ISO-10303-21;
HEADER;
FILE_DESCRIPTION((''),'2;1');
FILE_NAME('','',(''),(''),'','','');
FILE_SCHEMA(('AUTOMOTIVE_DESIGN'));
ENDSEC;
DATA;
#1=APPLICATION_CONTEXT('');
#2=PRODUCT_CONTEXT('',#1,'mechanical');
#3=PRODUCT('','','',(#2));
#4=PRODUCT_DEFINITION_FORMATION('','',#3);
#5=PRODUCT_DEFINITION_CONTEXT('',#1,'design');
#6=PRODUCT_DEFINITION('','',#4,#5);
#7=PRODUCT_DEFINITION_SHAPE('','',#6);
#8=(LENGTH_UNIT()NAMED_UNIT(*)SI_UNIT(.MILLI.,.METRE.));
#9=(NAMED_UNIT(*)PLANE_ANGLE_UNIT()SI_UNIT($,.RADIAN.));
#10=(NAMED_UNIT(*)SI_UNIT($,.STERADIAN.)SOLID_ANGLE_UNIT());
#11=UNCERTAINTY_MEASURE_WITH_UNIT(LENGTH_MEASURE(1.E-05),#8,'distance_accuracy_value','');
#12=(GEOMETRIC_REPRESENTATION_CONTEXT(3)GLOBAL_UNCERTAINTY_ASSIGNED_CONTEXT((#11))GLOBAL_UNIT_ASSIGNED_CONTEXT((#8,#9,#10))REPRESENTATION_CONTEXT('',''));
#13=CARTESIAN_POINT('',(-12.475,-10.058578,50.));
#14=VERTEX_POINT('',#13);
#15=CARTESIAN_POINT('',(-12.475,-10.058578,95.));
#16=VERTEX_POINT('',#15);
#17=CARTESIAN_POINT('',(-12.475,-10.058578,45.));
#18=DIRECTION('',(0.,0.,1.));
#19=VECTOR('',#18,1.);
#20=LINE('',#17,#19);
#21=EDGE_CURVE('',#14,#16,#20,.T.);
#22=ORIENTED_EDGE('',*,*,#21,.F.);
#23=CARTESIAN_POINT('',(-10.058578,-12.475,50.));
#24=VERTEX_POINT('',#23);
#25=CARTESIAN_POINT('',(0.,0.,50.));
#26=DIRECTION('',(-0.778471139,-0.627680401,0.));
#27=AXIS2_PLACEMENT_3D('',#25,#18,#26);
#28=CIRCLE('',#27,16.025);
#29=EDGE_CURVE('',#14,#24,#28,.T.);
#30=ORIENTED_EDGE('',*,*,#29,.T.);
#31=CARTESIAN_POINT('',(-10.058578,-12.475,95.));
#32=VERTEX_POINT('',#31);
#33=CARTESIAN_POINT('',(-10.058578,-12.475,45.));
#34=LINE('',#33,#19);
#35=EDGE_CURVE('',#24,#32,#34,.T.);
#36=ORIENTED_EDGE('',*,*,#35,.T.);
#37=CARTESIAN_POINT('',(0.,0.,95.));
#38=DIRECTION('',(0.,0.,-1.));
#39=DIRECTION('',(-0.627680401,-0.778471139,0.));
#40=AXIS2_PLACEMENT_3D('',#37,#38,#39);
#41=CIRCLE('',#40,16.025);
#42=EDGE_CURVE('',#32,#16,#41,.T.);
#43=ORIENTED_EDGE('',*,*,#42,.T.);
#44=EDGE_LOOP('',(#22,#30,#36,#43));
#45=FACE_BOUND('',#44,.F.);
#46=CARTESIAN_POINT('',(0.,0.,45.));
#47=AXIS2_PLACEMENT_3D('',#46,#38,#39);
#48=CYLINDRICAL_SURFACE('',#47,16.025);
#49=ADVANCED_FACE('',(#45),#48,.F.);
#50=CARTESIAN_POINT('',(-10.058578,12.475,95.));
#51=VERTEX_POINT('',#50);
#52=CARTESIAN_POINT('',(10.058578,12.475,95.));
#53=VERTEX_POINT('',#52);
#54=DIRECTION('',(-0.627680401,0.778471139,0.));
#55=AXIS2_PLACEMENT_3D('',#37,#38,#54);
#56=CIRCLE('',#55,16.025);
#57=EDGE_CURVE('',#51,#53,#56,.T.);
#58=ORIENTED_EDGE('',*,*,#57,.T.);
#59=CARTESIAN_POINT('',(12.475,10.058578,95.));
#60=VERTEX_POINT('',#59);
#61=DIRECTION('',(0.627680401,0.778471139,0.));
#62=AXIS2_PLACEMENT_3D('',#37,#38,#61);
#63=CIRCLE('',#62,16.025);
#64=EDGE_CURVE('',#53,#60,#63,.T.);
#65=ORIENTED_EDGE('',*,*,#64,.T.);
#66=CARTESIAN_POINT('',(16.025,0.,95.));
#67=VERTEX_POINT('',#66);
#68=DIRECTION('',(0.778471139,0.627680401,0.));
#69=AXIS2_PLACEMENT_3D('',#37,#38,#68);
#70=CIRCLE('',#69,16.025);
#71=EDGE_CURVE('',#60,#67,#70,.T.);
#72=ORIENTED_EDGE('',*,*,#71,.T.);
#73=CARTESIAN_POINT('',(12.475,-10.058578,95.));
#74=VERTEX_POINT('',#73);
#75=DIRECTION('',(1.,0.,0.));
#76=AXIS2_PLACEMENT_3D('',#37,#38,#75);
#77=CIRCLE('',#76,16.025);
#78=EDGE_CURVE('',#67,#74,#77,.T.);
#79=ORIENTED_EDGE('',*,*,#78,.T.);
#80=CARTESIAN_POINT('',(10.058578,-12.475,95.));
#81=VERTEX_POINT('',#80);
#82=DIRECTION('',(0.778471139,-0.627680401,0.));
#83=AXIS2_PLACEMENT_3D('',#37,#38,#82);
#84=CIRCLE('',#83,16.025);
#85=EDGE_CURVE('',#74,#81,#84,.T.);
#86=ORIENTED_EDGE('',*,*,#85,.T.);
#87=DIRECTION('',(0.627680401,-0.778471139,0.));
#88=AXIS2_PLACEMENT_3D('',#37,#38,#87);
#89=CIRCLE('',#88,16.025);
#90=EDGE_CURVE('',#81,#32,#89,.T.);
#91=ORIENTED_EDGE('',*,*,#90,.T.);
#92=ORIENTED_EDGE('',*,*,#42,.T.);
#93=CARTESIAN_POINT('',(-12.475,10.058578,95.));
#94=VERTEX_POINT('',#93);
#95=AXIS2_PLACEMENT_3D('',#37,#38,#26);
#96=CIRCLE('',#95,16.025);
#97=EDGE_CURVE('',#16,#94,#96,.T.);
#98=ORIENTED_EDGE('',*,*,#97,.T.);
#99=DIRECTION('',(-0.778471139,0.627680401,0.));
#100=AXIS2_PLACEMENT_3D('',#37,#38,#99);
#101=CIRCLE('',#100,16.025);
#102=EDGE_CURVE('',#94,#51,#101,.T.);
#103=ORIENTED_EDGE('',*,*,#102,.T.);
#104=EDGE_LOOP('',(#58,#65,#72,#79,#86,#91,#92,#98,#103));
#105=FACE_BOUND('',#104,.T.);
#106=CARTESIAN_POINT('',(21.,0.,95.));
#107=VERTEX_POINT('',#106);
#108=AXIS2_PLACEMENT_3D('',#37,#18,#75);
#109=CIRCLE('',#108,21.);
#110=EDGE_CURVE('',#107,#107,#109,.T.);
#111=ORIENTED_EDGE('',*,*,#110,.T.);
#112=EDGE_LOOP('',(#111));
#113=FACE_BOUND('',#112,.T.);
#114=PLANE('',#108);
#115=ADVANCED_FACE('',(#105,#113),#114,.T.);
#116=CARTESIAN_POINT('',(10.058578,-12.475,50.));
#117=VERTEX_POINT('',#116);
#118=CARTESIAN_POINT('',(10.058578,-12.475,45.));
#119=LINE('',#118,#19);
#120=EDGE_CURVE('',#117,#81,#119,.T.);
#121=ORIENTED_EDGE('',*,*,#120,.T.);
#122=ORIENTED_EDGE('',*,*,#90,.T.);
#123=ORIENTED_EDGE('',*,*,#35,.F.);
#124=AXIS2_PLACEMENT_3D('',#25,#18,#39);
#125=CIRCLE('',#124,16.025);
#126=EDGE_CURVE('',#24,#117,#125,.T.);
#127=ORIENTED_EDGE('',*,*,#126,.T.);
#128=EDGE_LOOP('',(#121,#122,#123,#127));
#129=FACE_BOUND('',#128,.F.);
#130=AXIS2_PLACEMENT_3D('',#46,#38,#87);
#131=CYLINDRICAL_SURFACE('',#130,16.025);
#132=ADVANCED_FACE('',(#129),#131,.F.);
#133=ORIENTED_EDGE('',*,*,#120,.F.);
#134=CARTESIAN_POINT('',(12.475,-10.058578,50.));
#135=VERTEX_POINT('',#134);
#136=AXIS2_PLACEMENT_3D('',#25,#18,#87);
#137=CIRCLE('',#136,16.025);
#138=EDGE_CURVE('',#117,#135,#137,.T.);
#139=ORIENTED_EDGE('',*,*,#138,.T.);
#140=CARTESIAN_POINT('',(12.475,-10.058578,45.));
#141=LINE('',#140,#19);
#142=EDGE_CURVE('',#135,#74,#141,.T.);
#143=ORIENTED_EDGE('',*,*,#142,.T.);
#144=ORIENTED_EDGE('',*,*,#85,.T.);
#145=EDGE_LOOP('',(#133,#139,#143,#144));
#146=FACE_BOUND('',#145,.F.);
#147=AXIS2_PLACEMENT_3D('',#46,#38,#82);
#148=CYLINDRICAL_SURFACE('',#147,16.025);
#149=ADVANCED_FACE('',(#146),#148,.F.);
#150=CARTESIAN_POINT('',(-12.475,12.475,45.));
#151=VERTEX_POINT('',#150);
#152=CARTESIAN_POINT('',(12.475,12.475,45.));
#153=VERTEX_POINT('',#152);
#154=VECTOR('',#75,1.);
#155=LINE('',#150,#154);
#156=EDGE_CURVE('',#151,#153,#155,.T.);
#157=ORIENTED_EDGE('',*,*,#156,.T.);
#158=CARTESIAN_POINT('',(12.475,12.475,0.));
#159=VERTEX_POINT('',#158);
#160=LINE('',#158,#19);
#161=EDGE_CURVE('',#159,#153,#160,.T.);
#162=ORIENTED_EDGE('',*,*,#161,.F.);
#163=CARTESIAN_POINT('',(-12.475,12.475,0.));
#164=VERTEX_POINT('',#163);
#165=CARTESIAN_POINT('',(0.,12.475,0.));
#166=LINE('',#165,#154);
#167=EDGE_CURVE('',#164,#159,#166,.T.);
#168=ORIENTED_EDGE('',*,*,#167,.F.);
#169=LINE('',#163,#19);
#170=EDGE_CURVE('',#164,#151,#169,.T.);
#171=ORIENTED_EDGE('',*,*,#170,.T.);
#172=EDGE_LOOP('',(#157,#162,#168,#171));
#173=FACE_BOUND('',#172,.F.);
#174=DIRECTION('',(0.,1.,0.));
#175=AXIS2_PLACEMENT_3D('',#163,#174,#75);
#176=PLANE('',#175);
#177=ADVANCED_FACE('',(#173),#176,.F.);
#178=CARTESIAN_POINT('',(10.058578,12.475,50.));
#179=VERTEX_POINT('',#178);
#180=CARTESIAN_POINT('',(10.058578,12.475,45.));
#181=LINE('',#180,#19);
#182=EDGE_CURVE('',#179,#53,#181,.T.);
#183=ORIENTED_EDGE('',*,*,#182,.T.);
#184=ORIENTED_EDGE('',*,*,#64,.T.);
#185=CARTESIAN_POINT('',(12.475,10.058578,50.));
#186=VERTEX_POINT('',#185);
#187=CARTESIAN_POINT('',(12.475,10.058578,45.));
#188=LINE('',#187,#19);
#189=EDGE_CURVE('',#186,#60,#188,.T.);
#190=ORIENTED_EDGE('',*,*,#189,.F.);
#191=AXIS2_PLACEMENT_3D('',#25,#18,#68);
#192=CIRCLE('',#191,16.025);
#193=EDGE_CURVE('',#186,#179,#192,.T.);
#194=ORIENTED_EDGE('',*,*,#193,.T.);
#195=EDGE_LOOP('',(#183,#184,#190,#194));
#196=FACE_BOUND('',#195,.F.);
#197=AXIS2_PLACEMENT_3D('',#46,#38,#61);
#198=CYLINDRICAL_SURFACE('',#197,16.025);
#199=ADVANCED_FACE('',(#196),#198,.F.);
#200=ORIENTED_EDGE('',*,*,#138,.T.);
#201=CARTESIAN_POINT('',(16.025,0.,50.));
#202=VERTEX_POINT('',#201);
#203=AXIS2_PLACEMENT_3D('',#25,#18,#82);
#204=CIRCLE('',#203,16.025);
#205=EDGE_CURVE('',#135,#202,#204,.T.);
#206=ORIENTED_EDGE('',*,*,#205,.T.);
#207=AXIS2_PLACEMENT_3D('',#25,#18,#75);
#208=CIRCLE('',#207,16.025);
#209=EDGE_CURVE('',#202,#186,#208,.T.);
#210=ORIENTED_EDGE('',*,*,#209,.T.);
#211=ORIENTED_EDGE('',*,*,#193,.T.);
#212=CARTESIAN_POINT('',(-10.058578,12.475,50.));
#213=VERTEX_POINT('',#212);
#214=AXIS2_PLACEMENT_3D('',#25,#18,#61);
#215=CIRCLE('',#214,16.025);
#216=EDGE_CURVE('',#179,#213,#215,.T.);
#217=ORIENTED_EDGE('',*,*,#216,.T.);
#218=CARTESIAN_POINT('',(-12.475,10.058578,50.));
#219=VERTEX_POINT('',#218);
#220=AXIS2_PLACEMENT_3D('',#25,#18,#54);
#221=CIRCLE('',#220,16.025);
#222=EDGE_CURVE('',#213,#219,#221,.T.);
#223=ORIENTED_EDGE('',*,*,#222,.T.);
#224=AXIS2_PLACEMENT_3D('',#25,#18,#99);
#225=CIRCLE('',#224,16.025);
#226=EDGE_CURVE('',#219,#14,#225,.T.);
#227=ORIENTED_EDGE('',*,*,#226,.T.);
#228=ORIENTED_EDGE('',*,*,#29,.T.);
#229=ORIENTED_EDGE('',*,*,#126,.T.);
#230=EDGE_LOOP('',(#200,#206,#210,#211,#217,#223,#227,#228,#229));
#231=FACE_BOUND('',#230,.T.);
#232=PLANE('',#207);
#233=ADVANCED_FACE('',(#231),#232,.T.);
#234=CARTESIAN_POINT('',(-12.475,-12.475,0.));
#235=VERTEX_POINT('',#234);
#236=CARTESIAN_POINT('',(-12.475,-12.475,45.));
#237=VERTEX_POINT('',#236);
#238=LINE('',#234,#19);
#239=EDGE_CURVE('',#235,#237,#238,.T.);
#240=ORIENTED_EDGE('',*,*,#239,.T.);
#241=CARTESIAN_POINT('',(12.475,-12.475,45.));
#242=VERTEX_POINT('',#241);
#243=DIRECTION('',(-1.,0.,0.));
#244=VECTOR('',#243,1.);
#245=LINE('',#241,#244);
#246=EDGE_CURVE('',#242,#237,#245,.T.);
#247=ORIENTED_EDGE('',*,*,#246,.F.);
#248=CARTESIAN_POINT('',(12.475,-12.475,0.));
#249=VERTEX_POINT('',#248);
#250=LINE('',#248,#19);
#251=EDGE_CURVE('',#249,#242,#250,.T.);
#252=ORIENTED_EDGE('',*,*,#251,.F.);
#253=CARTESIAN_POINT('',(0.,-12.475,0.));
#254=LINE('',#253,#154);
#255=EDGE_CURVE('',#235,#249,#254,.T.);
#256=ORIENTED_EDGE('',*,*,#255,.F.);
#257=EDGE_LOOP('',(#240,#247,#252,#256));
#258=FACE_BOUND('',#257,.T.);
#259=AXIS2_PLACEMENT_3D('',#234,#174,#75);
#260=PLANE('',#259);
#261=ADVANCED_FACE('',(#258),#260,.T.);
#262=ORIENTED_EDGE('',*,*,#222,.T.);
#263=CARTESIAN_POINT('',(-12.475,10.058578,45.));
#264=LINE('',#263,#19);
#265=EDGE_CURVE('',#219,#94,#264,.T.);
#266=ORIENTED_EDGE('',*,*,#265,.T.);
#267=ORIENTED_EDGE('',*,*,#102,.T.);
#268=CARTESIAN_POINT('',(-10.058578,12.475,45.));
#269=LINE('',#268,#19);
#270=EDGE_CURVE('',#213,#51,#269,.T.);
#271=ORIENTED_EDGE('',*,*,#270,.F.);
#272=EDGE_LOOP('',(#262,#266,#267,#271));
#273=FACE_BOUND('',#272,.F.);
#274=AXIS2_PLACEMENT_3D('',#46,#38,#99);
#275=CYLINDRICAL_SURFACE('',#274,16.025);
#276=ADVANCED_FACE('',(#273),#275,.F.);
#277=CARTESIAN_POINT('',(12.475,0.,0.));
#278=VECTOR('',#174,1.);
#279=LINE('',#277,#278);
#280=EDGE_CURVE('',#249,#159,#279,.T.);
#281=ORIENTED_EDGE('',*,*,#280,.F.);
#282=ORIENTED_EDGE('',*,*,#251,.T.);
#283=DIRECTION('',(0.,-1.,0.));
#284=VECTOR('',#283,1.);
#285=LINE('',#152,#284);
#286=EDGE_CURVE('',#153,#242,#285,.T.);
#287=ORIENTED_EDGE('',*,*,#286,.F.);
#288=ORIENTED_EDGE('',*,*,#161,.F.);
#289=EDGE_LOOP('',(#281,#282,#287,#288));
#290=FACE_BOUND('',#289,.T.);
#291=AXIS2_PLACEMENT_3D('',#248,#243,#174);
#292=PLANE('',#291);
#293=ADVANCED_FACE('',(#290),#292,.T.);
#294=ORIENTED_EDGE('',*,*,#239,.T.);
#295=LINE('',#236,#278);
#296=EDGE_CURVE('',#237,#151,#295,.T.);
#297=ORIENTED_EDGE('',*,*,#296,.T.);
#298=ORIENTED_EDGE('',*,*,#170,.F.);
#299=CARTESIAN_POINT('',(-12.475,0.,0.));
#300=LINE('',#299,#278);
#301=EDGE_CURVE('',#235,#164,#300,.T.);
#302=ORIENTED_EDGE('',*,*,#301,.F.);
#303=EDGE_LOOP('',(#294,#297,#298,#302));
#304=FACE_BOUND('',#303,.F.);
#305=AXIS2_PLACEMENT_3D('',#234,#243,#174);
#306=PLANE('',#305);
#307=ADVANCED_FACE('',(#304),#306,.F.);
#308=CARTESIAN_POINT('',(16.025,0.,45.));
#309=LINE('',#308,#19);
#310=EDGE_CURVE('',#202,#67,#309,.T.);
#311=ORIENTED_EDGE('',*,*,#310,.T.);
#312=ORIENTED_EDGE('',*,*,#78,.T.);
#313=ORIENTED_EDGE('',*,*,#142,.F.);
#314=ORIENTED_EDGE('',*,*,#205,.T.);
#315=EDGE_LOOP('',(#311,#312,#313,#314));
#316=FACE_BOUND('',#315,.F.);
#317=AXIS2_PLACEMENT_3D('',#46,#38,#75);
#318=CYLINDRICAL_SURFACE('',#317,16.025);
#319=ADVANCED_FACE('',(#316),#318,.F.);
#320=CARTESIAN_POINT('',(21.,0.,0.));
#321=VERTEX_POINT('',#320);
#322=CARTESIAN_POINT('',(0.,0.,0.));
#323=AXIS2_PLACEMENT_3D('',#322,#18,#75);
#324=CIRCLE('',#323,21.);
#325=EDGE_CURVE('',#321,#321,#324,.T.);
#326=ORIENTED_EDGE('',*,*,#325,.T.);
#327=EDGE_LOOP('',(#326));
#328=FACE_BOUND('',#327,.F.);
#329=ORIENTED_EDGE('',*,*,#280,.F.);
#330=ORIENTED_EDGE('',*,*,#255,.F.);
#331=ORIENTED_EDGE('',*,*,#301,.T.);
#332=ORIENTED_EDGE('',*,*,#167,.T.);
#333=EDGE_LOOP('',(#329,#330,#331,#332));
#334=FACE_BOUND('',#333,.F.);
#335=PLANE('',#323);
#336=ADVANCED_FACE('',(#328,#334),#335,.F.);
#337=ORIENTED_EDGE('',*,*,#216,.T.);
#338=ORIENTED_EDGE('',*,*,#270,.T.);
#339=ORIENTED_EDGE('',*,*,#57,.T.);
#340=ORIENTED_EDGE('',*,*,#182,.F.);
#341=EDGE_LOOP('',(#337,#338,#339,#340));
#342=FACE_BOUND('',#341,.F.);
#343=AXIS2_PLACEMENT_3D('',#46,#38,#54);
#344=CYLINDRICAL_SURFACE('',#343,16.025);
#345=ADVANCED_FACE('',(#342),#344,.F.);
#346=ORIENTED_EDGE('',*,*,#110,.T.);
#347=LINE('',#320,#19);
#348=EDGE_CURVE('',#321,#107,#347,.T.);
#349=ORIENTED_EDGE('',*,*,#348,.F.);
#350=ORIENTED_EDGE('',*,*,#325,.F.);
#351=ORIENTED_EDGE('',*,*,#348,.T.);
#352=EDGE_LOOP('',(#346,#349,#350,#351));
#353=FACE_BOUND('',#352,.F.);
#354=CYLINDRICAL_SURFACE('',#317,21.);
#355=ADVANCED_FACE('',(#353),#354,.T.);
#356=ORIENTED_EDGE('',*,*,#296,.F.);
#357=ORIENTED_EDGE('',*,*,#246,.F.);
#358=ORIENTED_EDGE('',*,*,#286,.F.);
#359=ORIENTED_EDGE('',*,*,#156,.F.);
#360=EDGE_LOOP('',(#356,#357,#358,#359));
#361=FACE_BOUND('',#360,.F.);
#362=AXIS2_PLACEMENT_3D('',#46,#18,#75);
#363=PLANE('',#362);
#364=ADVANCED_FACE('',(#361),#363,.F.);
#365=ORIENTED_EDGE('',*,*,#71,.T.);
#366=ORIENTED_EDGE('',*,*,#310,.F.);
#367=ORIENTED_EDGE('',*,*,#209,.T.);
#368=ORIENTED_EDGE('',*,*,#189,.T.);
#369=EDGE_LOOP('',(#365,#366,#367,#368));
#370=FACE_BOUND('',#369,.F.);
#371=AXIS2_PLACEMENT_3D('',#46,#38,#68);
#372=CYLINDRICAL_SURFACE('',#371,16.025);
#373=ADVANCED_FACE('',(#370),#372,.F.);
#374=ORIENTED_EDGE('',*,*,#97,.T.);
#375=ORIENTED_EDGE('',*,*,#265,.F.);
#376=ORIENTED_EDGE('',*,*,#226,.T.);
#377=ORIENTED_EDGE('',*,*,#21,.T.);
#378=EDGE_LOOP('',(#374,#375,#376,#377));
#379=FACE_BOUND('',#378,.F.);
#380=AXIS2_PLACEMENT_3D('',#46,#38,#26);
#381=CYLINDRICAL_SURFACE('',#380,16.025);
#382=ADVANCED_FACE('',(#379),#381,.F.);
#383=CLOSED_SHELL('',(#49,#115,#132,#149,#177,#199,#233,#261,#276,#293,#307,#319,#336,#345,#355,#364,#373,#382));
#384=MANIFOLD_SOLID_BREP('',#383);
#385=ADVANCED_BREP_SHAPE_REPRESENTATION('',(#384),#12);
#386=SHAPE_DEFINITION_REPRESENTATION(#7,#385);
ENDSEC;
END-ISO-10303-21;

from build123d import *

# Parameters (mm, degrees)
F0_R     = 21
F0_W     = 24.95
F0_H     = 24.95
F1_DEPTH = 45
F2_R     = 21
F3_DEPTH = 50
F4_DEPTH = 5


with BuildPart() as f1:
    # F0 (on Top) → F1 (new body)
    with BuildSketch(Plane.XY):
        Circle(F0_R)
        Rectangle(F0_W, F0_H, mode=Mode.SUBTRACT)
    extrude(amount=F1_DEPTH)

    # F2 (on face) → F3 (join)
    with BuildSketch(Plane.XY.offset(45)):
        Circle(F2_R)
        with BuildLine():
            ThreePointArc((12.475, 10.0585784284), (15.1114608824, 5.3333268229), (16.025, 0))
            ThreePointArc((16.025, 0), (15.1114608824, -5.3333268229), (12.475, -10.0585784284))
            Line((12.475, -10.0585784284), (12.475, -12.475))
            Line((12.475, -12.475), (10.0585784284, -12.475))
            ThreePointArc((10.0585784284, -12.475), (0, -16.025), (-10.0585784284, -12.475))
            Line((-10.0585784284, -12.475), (-12.475, -12.475))
            Line((-12.475, -12.475), (-12.475, -10.0585784284))
            ThreePointArc((-12.475, -10.0585784284), (-16.025, 0), (-12.475, 10.0585784284))
            Line((-12.475, 10.0585784284), (-12.475, 12.475))
            Line((-12.475, 12.475), (-10.0585784284, 12.475))
            ThreePointArc((-10.0585784284, 12.475), (0, 16.025), (10.0585784284, 12.475))
            Line((10.0585784284, 12.475), (12.475, 12.475))
            Line((12.475, 12.475), (12.475, 10.0585784284))
        make_face(mode=Mode.SUBTRACT)
        with BuildLine():
            ThreePointArc((10.0585784284, 12.475), (11.3313861685, 11.3313861685), (12.475, 10.0585784284))
            Line((12.475, 10.0585784284), (12.475, 12.475))
            Line((12.475, 12.475), (10.0585784284, 12.475))
        make_face()
        with BuildLine():
            Line((12.475, -12.475), (12.475, -10.0585784284))
            ThreePointArc((12.475, -10.0585784284), (11.3313861685, -11.3313861685), (10.0585784284, -12.475))
            Line((10.0585784284, -12.475), (12.475, -12.475))
        make_face()
        with BuildLine():
            ThreePointArc((-12.475, 10.0585784284), (-11.3313861685, 11.3313861685), (-10.0585784284, 12.475))
            Line((-10.0585784284, 12.475), (-12.475, 12.475))
            Line((-12.475, 12.475), (-12.475, 10.0585784284))
        make_face()
        with BuildLine():
            Line((-12.475, -12.475), (-10.0585784284, -12.475))
            ThreePointArc((-10.0585784284, -12.475), (-11.3313861685, -11.3313861685), (-12.475, -10.0585784284))
            Line((-12.475, -10.0585784284), (-12.475, -12.475))
        make_face()
    extrude(amount=F3_DEPTH)

    # F2 (on face) → F4 (join)
    with BuildSketch(Plane.XY.offset(45)):
        with BuildLine():
            Line((12.475, -10.0585784284), (12.475, 10.0585784284))
            ThreePointArc((12.475, 10.0585784284), (11.3313861685, 11.3313861685), (10.0585784284, 12.475))
            Line((10.0585784284, 12.475), (-10.0585784284, 12.475))
            ThreePointArc((-10.0585784284, 12.475), (-11.3313861685, 11.3313861685), (-12.475, 10.0585784284))
            Line((-12.475, 10.0585784284), (-12.475, -10.0585784284))
            ThreePointArc((-12.475, -10.0585784284), (-11.3313861685, -11.3313861685), (-10.0585784284, -12.475))
            Line((-10.0585784284, -12.475), (10.0585784284, -12.475))
            ThreePointArc((10.0585784284, -12.475), (11.3313861685, -11.3313861685), (12.475, -10.0585784284))
        make_face()
        with BuildLine():
            ThreePointArc((12.475, -10.0585784284), (15.1114608824, -5.3333268229), (16.025, 0))
            ThreePointArc((16.025, 0), (15.1114608824, 5.3333268229), (12.475, 10.0585784284))
            Line((12.475, 10.0585784284), (12.475, -10.0585784284))
        make_face()
        with BuildLine():
            Line((-12.475, -10.0585784284), (-12.475, 10.0585784284))
            ThreePointArc((-12.475, 10.0585784284), (-16.025, 0), (-12.475, -10.0585784284))
        make_face()
        with BuildLine():
            ThreePointArc((-10.0585784284, -12.475), (0, -16.025), (10.0585784284, -12.475))
            Line((10.0585784284, -12.475), (-10.0585784284, -12.475))
        make_face()
        with BuildLine():
            Line((-10.0585784284, 12.475), (10.0585784284, 12.475))
            ThreePointArc((10.0585784284, 12.475), (0, 16.025), (-10.0585784284, 12.475))
        make_face()
    extrude(amount=F4_DEPTH)


solid = f1.part
